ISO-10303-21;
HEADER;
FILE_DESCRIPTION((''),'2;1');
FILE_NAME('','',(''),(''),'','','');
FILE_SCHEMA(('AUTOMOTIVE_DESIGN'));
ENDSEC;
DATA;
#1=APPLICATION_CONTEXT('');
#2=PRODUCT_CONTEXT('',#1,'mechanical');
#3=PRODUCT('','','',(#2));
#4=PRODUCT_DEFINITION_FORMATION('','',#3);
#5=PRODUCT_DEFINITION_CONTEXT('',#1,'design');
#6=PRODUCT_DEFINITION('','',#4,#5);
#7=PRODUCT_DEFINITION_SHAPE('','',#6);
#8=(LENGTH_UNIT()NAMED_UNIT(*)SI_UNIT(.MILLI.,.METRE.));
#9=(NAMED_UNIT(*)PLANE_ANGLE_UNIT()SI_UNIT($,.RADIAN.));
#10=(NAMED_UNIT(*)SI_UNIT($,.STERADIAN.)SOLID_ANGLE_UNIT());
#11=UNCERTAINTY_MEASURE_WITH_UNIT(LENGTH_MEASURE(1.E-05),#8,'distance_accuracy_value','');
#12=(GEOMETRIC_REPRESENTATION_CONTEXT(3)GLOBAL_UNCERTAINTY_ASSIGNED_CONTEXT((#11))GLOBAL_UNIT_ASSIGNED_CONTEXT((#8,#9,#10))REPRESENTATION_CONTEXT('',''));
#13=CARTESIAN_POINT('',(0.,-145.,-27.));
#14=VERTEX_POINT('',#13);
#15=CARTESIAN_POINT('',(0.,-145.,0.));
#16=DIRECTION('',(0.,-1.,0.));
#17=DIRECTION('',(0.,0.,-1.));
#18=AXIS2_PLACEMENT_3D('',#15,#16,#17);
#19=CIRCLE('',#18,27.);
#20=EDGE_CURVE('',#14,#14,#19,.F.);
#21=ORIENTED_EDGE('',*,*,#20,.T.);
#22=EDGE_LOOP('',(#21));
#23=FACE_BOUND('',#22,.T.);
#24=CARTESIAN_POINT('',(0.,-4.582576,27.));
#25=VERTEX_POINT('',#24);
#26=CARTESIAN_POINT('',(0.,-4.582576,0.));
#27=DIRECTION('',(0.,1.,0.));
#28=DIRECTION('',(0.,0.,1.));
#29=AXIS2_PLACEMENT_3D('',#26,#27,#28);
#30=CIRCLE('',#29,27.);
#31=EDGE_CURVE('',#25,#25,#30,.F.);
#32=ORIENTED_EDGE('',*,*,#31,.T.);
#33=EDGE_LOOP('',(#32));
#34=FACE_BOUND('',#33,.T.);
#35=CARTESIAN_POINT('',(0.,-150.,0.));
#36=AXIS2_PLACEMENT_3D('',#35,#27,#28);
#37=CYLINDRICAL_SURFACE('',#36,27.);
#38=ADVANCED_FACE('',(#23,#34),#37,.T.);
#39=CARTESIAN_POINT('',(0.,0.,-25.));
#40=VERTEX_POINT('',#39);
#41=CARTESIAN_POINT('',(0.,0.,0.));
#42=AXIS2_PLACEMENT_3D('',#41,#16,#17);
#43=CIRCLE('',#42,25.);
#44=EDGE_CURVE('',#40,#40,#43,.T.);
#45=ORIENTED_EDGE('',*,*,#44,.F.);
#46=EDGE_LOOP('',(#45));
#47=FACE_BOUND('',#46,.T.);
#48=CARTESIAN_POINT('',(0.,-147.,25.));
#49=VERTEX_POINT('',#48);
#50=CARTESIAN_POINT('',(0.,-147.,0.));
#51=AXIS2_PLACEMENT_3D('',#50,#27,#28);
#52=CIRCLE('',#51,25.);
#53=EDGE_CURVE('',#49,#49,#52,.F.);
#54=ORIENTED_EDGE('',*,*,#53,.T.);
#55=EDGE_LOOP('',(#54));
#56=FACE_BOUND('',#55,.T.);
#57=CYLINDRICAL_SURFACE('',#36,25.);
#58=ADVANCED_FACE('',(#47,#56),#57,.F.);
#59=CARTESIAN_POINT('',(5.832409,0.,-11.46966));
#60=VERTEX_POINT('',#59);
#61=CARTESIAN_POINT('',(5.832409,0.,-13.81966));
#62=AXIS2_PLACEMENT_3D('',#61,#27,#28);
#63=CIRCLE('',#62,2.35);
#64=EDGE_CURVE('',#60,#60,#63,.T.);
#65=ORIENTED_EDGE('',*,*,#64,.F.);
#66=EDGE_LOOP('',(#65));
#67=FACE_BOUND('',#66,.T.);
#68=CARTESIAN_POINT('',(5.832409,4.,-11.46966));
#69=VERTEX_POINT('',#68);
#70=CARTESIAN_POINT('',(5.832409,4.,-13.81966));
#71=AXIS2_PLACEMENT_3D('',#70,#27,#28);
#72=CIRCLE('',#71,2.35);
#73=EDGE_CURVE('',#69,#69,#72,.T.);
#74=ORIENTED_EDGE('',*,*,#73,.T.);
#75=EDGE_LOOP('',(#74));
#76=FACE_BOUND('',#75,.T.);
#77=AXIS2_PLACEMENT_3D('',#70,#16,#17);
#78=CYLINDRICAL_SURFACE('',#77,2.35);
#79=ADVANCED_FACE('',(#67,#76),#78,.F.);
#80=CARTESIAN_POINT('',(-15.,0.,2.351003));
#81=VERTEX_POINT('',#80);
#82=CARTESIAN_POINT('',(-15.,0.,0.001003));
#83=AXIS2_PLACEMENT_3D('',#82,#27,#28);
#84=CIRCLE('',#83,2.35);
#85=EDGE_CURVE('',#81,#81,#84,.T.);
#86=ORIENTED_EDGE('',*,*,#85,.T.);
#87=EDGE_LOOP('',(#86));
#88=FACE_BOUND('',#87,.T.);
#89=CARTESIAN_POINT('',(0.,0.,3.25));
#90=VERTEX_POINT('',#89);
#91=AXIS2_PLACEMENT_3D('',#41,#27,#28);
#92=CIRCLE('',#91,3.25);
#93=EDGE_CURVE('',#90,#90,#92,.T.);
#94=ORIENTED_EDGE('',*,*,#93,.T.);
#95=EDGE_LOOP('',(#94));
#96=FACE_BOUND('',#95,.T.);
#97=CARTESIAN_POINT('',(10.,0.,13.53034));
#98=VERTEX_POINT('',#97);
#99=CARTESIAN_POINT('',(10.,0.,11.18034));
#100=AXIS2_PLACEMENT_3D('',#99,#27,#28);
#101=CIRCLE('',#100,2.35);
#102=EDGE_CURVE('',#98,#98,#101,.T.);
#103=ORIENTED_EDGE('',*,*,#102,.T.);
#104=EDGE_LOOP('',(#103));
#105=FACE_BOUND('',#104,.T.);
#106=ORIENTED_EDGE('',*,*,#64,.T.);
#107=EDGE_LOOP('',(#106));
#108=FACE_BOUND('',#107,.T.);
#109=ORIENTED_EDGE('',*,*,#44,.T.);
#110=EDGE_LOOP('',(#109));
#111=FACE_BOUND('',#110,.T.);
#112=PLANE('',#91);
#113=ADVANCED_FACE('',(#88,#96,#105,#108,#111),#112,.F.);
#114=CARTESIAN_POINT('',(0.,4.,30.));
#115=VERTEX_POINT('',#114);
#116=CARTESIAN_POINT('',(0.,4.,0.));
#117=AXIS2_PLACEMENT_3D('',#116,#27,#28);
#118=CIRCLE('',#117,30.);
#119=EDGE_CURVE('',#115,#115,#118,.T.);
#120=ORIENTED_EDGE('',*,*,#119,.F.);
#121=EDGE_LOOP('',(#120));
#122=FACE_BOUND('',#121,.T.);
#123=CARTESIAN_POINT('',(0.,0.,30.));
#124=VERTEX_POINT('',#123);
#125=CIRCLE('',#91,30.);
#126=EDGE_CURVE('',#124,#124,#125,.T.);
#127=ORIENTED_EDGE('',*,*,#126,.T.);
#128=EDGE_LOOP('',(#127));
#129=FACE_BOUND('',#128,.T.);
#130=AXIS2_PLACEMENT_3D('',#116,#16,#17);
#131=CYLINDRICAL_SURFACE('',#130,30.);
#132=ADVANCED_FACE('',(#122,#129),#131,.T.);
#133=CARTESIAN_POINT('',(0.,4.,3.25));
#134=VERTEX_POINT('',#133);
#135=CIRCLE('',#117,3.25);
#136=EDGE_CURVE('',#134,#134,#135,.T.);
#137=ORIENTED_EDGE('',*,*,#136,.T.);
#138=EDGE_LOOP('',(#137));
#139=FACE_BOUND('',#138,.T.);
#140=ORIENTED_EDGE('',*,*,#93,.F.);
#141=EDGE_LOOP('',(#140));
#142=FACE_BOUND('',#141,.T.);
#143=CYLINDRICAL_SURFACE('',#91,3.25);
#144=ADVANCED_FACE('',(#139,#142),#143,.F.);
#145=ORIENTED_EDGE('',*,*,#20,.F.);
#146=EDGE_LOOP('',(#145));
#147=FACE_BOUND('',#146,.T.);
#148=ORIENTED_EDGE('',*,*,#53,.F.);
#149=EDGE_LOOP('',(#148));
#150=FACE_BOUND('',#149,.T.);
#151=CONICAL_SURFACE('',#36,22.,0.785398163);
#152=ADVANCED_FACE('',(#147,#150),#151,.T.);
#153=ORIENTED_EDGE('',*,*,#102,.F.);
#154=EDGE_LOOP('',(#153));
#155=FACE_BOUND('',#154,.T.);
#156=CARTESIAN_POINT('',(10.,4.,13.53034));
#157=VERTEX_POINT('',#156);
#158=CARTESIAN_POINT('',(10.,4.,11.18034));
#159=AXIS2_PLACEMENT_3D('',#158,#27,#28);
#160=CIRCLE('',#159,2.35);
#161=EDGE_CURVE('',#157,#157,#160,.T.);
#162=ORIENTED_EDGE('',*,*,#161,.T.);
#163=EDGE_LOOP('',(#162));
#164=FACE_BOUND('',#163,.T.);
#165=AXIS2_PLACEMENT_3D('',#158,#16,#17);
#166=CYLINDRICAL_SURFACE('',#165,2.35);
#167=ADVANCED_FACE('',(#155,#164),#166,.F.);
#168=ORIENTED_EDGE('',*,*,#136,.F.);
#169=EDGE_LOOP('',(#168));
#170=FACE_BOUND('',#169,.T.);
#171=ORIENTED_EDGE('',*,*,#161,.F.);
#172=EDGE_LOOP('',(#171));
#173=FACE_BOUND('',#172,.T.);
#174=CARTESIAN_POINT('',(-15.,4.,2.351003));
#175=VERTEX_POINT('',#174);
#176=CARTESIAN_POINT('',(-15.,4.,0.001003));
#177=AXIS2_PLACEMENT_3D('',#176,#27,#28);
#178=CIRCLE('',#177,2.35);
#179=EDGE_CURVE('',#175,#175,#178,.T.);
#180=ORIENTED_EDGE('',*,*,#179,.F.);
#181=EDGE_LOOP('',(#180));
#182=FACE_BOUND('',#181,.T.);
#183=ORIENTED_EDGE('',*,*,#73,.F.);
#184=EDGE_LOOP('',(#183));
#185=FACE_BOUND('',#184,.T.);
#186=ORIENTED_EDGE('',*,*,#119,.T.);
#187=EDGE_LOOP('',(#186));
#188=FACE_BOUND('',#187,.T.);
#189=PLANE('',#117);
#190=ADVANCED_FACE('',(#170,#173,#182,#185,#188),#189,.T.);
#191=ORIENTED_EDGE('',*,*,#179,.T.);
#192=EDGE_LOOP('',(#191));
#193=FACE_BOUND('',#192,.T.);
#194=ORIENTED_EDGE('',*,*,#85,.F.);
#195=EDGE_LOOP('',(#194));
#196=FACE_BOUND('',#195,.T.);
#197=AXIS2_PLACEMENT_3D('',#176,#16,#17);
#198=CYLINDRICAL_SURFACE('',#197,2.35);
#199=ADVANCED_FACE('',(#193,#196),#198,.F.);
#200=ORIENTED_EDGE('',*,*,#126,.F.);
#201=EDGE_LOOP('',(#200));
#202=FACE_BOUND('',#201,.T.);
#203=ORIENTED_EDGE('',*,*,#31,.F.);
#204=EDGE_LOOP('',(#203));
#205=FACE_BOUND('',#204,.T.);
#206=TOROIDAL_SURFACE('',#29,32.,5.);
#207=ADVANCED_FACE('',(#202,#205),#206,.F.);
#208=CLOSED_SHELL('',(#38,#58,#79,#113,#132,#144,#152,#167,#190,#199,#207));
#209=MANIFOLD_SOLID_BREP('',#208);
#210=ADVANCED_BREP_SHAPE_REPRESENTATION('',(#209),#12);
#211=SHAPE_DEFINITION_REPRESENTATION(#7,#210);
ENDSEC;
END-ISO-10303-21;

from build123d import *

# Parameters (mm, degrees)
SKETCH1_R           = 30
SKETCH1_R_2         = 2.35
BOSS_EXTRUDE1_DEPTH = 4
SKETCH2_R           = 3.25
CUT_EXTRUDE1_DEPTH  = 4
SKETCH3_R           = 27
SKETCH3_R_2         = 25
BOSS_EXTRUDE2_DEPTH = 150
CHAMFER1_SIZE       = 5
FILLET1_R           = 5


with BuildPart() as part:
    # Sketch1 → Boss-Extrude1 (new body)
    with BuildSketch(Plane(origin=(0, 0, 0), x_dir=(1, 0, 0), z_dir=(0, 1, 0))):
        with Locations(Location((0, 0, 0), (0, 0, 270))):
            Circle(SKETCH1_R)
        with Locations(Location((-15, -0.001003279, 0), (0, 0, 270))):
            Circle(SKETCH1_R_2, mode=Mode.SUBTRACT)
        with Locations(Location((5.832408968, 13.819660113, 0), (0, 0, 270))):
            Circle(SKETCH1_R_2, mode=Mode.SUBTRACT)
        with Locations(Location((10, -11.180339887, 0), (0, 0, 270))):
            Circle(SKETCH1_R_2, mode=Mode.SUBTRACT)
    extrude(amount=BOSS_EXTRUDE1_DEPTH)

    # Sketch2 → Cut-Extrude1 (cut)
    with BuildSketch(Plane(origin=(0, 4, 0), x_dir=(1, 0, 0), z_dir=(0, 1, 0))):
        with Locations(Location((0, 0, 0), (0, 0, 270))):
            Circle(SKETCH2_R)
    extrude(amount=-CUT_EXTRUDE1_DEPTH, mode=Mode.SUBTRACT)

    # Sketch3 → Boss-Extrude2 (add)
    with BuildSketch(Plane.XZ):
        with Locations(Location((0, 0, 0), (0, 0, 90))):
            Circle(SKETCH3_R)
        with Locations(Location((0, 0, 0), (0, 0, 270))):
            Circle(SKETCH3_R_2, mode=Mode.SUBTRACT)
    extrude(amount=BOSS_EXTRUDE2_DEPTH)

    # Chamfer1
    # the kernel refuses this chamfer: 5 mm, written as the material it takes off along each edge
    with BuildSketch(Plane(origin=(0, -150, 0), x_dir=(0, 0, 1), z_dir=(1, 0, 0))) as chamfer1_piece_1:
        Polygon((27, -CHAMFER1_SIZE), (27 - CHAMFER1_SIZE, 0), (27, 0), align=None)
    revolve(axis=Axis((0, -150, 0), (0, -1, 0)), mode=Mode.SUBTRACT)

    # Fillet1
    # the kernel refuses this fillet: 5 mm, written as the material it adds along each edge
    with BuildSketch(Plane(origin=(0, 0, 0), x_dir=(0, 0, 1), z_dir=(1, 0, 0))) as fillet1_piece_1:
        with BuildLine():
            CenterArc((32, 4.582575695), FILLET1_R, 180, 66.421821522)
            Line((27, 4.582575695), (26.9, 4.582575695))
            Line((26.9, 4.582575695), (26.9, 0))
            Line((26.9, 0), (27, -0.1))
            ThreePointArc((27, -0.1), (28.5, -0.1), (29.96, -0.091651514))
            Line((29.96, -0.091651514), (30, 0))
        make_face()
    revolve(axis=Axis((0, 0, 0), (0, -1, 0)))


solid = part.part
